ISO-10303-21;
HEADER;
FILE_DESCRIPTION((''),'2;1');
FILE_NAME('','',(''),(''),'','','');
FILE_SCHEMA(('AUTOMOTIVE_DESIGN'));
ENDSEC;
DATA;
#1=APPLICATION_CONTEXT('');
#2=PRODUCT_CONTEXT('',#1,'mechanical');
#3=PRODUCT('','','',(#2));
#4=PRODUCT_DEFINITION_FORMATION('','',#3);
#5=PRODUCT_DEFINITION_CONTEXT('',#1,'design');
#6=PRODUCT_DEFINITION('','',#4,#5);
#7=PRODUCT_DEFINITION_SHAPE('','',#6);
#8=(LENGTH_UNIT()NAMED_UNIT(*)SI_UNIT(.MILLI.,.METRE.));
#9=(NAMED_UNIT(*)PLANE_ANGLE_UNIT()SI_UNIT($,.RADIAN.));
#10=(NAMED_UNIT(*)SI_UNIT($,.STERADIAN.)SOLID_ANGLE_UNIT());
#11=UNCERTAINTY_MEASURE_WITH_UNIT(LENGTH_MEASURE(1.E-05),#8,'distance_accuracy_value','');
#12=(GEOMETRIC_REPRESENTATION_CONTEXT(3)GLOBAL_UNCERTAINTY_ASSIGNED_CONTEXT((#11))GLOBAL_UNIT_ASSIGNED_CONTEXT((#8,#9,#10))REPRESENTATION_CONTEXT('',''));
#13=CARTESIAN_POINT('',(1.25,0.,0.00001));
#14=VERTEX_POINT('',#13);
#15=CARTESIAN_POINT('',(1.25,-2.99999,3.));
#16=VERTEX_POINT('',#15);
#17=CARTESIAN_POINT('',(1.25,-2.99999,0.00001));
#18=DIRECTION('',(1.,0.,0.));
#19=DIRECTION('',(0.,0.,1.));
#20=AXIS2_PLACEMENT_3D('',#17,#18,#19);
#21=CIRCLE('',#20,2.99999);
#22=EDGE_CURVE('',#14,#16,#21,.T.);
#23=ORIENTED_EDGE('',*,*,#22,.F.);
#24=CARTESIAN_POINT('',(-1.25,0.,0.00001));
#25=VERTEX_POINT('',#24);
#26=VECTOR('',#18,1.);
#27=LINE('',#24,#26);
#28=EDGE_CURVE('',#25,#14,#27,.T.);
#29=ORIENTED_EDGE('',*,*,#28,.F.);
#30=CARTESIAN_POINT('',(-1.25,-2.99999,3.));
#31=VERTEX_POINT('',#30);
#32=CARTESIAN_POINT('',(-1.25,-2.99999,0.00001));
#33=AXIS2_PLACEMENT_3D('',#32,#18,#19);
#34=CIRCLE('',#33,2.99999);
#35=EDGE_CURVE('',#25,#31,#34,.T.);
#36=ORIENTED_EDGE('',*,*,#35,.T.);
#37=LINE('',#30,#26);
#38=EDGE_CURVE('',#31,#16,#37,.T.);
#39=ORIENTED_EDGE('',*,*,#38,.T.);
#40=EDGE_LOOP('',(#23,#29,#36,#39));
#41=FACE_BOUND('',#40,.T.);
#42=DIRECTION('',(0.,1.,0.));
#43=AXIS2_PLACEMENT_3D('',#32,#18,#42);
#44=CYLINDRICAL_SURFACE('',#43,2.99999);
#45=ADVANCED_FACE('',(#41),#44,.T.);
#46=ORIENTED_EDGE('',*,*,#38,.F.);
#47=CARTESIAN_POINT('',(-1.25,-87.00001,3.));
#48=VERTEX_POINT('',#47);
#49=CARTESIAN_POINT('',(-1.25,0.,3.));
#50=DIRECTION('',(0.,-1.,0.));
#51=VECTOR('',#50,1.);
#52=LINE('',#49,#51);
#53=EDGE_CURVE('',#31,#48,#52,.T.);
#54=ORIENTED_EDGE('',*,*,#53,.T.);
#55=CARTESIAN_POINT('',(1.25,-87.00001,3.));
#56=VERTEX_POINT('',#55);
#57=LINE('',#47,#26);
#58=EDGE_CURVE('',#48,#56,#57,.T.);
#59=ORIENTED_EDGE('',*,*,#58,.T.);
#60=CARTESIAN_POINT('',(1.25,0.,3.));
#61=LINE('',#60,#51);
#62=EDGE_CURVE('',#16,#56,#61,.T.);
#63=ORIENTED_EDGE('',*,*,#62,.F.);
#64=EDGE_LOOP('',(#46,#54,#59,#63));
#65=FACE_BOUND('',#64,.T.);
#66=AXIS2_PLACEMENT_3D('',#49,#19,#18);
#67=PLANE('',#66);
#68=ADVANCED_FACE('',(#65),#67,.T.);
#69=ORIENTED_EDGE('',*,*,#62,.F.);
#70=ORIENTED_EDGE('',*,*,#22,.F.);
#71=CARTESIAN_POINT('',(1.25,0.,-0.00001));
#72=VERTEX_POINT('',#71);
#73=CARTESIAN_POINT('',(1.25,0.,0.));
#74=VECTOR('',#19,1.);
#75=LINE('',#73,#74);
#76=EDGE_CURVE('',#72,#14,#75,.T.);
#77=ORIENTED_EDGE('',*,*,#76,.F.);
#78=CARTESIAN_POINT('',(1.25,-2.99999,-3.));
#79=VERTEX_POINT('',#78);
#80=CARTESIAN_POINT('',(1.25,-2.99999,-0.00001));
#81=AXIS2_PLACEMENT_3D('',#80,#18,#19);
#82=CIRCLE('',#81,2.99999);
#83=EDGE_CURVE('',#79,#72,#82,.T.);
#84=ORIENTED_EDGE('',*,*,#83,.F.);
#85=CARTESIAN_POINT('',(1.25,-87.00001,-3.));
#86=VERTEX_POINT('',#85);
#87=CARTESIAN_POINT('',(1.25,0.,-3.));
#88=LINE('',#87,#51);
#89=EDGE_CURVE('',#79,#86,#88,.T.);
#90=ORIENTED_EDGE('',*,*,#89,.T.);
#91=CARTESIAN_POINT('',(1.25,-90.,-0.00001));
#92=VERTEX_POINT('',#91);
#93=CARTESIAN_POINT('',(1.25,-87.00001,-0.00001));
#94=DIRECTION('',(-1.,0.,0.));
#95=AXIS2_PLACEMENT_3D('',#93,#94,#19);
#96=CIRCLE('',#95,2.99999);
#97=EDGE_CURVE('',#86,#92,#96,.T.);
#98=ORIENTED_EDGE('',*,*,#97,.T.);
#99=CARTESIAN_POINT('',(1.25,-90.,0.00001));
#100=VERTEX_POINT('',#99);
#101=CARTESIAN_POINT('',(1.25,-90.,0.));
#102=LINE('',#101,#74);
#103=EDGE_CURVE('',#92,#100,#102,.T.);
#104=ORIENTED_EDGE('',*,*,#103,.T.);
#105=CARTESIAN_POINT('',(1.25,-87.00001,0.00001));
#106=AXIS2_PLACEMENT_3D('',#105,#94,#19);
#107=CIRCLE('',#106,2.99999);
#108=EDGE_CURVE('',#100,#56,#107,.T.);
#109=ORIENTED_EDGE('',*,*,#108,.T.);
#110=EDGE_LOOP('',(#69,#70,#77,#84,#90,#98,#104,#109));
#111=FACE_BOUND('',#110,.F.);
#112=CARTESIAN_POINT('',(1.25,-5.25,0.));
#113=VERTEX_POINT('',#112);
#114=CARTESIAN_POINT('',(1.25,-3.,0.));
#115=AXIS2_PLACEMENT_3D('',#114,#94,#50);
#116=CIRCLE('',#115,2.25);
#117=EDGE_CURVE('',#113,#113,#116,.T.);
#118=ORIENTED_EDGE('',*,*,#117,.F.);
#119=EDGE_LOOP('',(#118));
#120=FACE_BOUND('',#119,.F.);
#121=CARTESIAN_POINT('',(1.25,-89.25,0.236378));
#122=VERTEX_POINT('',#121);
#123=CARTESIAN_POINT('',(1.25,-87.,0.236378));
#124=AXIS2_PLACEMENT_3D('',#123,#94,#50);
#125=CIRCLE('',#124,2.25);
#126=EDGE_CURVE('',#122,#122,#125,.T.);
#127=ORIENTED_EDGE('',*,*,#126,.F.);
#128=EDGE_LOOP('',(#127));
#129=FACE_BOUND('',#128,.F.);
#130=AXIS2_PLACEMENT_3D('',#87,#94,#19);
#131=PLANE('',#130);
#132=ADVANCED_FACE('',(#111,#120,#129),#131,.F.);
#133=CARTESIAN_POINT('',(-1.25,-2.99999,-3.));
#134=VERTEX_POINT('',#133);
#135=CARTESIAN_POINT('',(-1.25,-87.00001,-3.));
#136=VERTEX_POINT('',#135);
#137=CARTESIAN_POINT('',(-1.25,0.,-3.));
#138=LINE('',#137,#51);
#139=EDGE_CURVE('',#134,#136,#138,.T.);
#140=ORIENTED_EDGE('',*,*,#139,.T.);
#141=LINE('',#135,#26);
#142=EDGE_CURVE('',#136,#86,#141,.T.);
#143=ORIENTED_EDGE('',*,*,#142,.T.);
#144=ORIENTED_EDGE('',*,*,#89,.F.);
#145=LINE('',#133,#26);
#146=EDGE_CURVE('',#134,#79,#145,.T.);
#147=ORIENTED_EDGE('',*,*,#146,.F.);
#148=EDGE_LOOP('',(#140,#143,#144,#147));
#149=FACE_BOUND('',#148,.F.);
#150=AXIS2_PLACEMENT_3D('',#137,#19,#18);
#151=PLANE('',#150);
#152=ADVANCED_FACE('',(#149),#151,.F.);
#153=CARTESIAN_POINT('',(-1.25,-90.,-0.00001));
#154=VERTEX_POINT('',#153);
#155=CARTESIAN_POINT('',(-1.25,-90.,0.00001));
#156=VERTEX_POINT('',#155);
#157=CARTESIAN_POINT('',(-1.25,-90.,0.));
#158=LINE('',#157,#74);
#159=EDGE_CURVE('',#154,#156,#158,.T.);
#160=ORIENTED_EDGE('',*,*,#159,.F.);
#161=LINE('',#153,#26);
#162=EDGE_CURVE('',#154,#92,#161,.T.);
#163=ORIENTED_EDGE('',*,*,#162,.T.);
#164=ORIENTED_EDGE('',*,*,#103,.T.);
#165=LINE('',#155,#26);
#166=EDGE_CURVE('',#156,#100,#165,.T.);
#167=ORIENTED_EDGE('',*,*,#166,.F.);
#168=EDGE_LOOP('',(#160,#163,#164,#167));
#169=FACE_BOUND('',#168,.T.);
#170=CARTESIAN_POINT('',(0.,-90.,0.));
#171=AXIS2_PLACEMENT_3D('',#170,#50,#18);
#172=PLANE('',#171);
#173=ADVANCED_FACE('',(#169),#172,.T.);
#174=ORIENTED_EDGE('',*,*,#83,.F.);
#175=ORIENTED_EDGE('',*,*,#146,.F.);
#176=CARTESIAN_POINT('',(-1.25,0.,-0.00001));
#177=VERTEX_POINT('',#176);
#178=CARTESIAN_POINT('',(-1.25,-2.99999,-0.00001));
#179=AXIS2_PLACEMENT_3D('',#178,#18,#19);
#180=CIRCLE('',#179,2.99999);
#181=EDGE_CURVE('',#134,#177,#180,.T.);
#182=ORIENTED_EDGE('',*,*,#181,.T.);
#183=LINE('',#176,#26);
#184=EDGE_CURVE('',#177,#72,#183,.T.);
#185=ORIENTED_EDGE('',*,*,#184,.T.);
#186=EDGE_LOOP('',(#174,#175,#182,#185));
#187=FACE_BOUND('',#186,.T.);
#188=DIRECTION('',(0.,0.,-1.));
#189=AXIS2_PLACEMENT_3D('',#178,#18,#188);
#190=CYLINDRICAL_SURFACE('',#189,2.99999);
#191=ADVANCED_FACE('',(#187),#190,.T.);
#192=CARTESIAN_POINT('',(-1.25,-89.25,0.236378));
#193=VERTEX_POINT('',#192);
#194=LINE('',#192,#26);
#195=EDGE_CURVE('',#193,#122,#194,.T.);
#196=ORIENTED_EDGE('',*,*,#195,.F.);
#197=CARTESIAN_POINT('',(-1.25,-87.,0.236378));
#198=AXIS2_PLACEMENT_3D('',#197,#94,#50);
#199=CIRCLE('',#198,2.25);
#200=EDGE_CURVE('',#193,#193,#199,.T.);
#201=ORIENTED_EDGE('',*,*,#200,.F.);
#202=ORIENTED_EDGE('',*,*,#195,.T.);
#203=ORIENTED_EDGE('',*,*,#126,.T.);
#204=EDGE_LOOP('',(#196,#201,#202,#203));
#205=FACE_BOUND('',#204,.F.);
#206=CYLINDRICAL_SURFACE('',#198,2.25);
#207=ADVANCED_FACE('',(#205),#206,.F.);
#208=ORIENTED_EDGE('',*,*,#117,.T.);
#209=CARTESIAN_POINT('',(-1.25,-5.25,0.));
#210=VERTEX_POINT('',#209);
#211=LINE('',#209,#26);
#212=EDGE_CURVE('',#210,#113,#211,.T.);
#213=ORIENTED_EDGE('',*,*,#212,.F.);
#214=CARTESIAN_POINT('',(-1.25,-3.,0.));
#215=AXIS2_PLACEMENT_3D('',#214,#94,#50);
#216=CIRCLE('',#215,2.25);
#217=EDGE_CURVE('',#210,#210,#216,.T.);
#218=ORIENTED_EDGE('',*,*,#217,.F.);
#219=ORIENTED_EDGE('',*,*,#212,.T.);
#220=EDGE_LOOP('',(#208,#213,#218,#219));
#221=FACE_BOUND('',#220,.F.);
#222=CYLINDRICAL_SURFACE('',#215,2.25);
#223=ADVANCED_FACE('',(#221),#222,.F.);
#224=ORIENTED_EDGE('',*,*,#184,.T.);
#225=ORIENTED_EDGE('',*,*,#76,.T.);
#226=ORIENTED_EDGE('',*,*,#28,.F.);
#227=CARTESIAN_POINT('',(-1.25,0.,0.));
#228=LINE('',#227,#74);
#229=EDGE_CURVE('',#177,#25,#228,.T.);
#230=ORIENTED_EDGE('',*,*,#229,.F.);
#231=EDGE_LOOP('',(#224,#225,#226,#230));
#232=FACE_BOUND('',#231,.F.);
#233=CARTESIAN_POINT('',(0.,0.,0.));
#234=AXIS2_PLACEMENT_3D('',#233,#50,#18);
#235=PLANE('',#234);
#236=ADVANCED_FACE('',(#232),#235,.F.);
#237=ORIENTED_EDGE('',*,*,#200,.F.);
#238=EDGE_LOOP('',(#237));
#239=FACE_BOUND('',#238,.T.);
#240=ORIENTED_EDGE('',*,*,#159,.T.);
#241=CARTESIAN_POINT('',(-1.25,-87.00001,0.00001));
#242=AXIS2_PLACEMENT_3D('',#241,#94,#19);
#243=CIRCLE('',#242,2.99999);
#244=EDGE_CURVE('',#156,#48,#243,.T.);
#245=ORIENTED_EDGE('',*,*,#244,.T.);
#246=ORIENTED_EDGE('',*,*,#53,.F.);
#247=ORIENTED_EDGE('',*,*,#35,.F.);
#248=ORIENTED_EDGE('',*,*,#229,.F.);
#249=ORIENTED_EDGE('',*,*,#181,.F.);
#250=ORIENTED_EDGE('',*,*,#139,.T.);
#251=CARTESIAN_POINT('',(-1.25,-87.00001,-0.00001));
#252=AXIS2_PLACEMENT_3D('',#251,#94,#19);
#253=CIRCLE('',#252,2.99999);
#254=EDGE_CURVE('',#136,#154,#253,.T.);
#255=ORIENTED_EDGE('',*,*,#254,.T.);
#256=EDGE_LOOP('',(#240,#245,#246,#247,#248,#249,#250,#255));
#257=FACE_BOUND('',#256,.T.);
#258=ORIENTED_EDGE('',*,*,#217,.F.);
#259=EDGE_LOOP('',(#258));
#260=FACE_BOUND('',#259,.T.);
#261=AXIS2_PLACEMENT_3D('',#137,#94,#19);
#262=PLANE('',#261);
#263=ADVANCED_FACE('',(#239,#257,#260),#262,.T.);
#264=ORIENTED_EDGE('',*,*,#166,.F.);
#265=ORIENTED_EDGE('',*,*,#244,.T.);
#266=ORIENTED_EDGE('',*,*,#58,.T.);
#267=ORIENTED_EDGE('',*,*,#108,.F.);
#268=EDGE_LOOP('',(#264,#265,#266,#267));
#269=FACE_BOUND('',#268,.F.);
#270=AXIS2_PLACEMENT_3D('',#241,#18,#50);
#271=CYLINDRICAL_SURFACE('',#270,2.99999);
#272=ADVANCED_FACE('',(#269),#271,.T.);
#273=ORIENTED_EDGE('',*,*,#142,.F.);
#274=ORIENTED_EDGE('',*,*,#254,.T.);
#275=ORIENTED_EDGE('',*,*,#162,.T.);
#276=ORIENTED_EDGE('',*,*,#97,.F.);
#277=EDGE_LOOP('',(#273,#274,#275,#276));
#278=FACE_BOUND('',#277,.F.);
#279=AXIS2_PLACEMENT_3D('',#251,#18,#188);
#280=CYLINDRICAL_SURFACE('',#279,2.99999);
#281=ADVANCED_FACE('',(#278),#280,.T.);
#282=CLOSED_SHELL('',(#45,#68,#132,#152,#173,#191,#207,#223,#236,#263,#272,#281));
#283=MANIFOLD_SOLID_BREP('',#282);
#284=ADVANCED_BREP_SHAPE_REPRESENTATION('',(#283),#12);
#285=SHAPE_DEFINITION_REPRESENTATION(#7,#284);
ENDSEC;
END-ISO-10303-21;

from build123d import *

# Parameters (mm, degrees)
F0_W     = 2.5
F0_H     = 6
F1_DEPTH = 90
F2_R     = 2.25
F3_DEPTH = 25
F4_R     = 2.99999
F5_R     = 2.25
F6_DEPTH = 25
F7_R     = 2.99999


# Not quite as in the source:
# - a fillet or chamfer is up to 0.001 mm smaller than in the source, because OpenCascade refuses the exact size


with BuildPart() as f1:
    # F0 (on Front) → F1 (new body)
    with BuildSketch(Plane.XZ):
        Rectangle(F0_W, F0_H)
    extrude(amount=F1_DEPTH)

    # F2 (on face) → F3 (cut)
    with BuildSketch(Plane(origin=(-1.25, 0, 0), x_dir=(0, -1, 0), z_dir=(-1, 0, 0))):
        with Locations((3, 0)):
            Circle(F2_R)
    extrude(amount=-F3_DEPTH, mode=Mode.SUBTRACT)

    # F4 (radius 3 in the source; OpenCascade refuses exactly that, so slightly less here)
    f4_edges = [f1.edges().sort_by_distance(p)[0] for p in [
        (0, 0, 3),
        (0, 0, -3),
    ]]
    fillet(f4_edges, radius=F4_R)

    # F5 (on face) → F6 (cut)
    with BuildSketch(Plane(origin=(-1.25, 0, 0), x_dir=(0, -1, 0), z_dir=(-1, 0, 0))):
        with Locations((87, 0.2363782405)):
            Circle(F5_R)
    extrude(amount=-F6_DEPTH, mode=Mode.SUBTRACT)

    # F7 (radius 3 in the source; OpenCascade refuses exactly that, so slightly less here)
    f7_edges = [f1.edges().sort_by_distance(p)[0] for p in [
        (0, -90, 3),
        (0, -90, -3),
    ]]
    fillet(f7_edges, radius=F7_R)


solid = f1.part
